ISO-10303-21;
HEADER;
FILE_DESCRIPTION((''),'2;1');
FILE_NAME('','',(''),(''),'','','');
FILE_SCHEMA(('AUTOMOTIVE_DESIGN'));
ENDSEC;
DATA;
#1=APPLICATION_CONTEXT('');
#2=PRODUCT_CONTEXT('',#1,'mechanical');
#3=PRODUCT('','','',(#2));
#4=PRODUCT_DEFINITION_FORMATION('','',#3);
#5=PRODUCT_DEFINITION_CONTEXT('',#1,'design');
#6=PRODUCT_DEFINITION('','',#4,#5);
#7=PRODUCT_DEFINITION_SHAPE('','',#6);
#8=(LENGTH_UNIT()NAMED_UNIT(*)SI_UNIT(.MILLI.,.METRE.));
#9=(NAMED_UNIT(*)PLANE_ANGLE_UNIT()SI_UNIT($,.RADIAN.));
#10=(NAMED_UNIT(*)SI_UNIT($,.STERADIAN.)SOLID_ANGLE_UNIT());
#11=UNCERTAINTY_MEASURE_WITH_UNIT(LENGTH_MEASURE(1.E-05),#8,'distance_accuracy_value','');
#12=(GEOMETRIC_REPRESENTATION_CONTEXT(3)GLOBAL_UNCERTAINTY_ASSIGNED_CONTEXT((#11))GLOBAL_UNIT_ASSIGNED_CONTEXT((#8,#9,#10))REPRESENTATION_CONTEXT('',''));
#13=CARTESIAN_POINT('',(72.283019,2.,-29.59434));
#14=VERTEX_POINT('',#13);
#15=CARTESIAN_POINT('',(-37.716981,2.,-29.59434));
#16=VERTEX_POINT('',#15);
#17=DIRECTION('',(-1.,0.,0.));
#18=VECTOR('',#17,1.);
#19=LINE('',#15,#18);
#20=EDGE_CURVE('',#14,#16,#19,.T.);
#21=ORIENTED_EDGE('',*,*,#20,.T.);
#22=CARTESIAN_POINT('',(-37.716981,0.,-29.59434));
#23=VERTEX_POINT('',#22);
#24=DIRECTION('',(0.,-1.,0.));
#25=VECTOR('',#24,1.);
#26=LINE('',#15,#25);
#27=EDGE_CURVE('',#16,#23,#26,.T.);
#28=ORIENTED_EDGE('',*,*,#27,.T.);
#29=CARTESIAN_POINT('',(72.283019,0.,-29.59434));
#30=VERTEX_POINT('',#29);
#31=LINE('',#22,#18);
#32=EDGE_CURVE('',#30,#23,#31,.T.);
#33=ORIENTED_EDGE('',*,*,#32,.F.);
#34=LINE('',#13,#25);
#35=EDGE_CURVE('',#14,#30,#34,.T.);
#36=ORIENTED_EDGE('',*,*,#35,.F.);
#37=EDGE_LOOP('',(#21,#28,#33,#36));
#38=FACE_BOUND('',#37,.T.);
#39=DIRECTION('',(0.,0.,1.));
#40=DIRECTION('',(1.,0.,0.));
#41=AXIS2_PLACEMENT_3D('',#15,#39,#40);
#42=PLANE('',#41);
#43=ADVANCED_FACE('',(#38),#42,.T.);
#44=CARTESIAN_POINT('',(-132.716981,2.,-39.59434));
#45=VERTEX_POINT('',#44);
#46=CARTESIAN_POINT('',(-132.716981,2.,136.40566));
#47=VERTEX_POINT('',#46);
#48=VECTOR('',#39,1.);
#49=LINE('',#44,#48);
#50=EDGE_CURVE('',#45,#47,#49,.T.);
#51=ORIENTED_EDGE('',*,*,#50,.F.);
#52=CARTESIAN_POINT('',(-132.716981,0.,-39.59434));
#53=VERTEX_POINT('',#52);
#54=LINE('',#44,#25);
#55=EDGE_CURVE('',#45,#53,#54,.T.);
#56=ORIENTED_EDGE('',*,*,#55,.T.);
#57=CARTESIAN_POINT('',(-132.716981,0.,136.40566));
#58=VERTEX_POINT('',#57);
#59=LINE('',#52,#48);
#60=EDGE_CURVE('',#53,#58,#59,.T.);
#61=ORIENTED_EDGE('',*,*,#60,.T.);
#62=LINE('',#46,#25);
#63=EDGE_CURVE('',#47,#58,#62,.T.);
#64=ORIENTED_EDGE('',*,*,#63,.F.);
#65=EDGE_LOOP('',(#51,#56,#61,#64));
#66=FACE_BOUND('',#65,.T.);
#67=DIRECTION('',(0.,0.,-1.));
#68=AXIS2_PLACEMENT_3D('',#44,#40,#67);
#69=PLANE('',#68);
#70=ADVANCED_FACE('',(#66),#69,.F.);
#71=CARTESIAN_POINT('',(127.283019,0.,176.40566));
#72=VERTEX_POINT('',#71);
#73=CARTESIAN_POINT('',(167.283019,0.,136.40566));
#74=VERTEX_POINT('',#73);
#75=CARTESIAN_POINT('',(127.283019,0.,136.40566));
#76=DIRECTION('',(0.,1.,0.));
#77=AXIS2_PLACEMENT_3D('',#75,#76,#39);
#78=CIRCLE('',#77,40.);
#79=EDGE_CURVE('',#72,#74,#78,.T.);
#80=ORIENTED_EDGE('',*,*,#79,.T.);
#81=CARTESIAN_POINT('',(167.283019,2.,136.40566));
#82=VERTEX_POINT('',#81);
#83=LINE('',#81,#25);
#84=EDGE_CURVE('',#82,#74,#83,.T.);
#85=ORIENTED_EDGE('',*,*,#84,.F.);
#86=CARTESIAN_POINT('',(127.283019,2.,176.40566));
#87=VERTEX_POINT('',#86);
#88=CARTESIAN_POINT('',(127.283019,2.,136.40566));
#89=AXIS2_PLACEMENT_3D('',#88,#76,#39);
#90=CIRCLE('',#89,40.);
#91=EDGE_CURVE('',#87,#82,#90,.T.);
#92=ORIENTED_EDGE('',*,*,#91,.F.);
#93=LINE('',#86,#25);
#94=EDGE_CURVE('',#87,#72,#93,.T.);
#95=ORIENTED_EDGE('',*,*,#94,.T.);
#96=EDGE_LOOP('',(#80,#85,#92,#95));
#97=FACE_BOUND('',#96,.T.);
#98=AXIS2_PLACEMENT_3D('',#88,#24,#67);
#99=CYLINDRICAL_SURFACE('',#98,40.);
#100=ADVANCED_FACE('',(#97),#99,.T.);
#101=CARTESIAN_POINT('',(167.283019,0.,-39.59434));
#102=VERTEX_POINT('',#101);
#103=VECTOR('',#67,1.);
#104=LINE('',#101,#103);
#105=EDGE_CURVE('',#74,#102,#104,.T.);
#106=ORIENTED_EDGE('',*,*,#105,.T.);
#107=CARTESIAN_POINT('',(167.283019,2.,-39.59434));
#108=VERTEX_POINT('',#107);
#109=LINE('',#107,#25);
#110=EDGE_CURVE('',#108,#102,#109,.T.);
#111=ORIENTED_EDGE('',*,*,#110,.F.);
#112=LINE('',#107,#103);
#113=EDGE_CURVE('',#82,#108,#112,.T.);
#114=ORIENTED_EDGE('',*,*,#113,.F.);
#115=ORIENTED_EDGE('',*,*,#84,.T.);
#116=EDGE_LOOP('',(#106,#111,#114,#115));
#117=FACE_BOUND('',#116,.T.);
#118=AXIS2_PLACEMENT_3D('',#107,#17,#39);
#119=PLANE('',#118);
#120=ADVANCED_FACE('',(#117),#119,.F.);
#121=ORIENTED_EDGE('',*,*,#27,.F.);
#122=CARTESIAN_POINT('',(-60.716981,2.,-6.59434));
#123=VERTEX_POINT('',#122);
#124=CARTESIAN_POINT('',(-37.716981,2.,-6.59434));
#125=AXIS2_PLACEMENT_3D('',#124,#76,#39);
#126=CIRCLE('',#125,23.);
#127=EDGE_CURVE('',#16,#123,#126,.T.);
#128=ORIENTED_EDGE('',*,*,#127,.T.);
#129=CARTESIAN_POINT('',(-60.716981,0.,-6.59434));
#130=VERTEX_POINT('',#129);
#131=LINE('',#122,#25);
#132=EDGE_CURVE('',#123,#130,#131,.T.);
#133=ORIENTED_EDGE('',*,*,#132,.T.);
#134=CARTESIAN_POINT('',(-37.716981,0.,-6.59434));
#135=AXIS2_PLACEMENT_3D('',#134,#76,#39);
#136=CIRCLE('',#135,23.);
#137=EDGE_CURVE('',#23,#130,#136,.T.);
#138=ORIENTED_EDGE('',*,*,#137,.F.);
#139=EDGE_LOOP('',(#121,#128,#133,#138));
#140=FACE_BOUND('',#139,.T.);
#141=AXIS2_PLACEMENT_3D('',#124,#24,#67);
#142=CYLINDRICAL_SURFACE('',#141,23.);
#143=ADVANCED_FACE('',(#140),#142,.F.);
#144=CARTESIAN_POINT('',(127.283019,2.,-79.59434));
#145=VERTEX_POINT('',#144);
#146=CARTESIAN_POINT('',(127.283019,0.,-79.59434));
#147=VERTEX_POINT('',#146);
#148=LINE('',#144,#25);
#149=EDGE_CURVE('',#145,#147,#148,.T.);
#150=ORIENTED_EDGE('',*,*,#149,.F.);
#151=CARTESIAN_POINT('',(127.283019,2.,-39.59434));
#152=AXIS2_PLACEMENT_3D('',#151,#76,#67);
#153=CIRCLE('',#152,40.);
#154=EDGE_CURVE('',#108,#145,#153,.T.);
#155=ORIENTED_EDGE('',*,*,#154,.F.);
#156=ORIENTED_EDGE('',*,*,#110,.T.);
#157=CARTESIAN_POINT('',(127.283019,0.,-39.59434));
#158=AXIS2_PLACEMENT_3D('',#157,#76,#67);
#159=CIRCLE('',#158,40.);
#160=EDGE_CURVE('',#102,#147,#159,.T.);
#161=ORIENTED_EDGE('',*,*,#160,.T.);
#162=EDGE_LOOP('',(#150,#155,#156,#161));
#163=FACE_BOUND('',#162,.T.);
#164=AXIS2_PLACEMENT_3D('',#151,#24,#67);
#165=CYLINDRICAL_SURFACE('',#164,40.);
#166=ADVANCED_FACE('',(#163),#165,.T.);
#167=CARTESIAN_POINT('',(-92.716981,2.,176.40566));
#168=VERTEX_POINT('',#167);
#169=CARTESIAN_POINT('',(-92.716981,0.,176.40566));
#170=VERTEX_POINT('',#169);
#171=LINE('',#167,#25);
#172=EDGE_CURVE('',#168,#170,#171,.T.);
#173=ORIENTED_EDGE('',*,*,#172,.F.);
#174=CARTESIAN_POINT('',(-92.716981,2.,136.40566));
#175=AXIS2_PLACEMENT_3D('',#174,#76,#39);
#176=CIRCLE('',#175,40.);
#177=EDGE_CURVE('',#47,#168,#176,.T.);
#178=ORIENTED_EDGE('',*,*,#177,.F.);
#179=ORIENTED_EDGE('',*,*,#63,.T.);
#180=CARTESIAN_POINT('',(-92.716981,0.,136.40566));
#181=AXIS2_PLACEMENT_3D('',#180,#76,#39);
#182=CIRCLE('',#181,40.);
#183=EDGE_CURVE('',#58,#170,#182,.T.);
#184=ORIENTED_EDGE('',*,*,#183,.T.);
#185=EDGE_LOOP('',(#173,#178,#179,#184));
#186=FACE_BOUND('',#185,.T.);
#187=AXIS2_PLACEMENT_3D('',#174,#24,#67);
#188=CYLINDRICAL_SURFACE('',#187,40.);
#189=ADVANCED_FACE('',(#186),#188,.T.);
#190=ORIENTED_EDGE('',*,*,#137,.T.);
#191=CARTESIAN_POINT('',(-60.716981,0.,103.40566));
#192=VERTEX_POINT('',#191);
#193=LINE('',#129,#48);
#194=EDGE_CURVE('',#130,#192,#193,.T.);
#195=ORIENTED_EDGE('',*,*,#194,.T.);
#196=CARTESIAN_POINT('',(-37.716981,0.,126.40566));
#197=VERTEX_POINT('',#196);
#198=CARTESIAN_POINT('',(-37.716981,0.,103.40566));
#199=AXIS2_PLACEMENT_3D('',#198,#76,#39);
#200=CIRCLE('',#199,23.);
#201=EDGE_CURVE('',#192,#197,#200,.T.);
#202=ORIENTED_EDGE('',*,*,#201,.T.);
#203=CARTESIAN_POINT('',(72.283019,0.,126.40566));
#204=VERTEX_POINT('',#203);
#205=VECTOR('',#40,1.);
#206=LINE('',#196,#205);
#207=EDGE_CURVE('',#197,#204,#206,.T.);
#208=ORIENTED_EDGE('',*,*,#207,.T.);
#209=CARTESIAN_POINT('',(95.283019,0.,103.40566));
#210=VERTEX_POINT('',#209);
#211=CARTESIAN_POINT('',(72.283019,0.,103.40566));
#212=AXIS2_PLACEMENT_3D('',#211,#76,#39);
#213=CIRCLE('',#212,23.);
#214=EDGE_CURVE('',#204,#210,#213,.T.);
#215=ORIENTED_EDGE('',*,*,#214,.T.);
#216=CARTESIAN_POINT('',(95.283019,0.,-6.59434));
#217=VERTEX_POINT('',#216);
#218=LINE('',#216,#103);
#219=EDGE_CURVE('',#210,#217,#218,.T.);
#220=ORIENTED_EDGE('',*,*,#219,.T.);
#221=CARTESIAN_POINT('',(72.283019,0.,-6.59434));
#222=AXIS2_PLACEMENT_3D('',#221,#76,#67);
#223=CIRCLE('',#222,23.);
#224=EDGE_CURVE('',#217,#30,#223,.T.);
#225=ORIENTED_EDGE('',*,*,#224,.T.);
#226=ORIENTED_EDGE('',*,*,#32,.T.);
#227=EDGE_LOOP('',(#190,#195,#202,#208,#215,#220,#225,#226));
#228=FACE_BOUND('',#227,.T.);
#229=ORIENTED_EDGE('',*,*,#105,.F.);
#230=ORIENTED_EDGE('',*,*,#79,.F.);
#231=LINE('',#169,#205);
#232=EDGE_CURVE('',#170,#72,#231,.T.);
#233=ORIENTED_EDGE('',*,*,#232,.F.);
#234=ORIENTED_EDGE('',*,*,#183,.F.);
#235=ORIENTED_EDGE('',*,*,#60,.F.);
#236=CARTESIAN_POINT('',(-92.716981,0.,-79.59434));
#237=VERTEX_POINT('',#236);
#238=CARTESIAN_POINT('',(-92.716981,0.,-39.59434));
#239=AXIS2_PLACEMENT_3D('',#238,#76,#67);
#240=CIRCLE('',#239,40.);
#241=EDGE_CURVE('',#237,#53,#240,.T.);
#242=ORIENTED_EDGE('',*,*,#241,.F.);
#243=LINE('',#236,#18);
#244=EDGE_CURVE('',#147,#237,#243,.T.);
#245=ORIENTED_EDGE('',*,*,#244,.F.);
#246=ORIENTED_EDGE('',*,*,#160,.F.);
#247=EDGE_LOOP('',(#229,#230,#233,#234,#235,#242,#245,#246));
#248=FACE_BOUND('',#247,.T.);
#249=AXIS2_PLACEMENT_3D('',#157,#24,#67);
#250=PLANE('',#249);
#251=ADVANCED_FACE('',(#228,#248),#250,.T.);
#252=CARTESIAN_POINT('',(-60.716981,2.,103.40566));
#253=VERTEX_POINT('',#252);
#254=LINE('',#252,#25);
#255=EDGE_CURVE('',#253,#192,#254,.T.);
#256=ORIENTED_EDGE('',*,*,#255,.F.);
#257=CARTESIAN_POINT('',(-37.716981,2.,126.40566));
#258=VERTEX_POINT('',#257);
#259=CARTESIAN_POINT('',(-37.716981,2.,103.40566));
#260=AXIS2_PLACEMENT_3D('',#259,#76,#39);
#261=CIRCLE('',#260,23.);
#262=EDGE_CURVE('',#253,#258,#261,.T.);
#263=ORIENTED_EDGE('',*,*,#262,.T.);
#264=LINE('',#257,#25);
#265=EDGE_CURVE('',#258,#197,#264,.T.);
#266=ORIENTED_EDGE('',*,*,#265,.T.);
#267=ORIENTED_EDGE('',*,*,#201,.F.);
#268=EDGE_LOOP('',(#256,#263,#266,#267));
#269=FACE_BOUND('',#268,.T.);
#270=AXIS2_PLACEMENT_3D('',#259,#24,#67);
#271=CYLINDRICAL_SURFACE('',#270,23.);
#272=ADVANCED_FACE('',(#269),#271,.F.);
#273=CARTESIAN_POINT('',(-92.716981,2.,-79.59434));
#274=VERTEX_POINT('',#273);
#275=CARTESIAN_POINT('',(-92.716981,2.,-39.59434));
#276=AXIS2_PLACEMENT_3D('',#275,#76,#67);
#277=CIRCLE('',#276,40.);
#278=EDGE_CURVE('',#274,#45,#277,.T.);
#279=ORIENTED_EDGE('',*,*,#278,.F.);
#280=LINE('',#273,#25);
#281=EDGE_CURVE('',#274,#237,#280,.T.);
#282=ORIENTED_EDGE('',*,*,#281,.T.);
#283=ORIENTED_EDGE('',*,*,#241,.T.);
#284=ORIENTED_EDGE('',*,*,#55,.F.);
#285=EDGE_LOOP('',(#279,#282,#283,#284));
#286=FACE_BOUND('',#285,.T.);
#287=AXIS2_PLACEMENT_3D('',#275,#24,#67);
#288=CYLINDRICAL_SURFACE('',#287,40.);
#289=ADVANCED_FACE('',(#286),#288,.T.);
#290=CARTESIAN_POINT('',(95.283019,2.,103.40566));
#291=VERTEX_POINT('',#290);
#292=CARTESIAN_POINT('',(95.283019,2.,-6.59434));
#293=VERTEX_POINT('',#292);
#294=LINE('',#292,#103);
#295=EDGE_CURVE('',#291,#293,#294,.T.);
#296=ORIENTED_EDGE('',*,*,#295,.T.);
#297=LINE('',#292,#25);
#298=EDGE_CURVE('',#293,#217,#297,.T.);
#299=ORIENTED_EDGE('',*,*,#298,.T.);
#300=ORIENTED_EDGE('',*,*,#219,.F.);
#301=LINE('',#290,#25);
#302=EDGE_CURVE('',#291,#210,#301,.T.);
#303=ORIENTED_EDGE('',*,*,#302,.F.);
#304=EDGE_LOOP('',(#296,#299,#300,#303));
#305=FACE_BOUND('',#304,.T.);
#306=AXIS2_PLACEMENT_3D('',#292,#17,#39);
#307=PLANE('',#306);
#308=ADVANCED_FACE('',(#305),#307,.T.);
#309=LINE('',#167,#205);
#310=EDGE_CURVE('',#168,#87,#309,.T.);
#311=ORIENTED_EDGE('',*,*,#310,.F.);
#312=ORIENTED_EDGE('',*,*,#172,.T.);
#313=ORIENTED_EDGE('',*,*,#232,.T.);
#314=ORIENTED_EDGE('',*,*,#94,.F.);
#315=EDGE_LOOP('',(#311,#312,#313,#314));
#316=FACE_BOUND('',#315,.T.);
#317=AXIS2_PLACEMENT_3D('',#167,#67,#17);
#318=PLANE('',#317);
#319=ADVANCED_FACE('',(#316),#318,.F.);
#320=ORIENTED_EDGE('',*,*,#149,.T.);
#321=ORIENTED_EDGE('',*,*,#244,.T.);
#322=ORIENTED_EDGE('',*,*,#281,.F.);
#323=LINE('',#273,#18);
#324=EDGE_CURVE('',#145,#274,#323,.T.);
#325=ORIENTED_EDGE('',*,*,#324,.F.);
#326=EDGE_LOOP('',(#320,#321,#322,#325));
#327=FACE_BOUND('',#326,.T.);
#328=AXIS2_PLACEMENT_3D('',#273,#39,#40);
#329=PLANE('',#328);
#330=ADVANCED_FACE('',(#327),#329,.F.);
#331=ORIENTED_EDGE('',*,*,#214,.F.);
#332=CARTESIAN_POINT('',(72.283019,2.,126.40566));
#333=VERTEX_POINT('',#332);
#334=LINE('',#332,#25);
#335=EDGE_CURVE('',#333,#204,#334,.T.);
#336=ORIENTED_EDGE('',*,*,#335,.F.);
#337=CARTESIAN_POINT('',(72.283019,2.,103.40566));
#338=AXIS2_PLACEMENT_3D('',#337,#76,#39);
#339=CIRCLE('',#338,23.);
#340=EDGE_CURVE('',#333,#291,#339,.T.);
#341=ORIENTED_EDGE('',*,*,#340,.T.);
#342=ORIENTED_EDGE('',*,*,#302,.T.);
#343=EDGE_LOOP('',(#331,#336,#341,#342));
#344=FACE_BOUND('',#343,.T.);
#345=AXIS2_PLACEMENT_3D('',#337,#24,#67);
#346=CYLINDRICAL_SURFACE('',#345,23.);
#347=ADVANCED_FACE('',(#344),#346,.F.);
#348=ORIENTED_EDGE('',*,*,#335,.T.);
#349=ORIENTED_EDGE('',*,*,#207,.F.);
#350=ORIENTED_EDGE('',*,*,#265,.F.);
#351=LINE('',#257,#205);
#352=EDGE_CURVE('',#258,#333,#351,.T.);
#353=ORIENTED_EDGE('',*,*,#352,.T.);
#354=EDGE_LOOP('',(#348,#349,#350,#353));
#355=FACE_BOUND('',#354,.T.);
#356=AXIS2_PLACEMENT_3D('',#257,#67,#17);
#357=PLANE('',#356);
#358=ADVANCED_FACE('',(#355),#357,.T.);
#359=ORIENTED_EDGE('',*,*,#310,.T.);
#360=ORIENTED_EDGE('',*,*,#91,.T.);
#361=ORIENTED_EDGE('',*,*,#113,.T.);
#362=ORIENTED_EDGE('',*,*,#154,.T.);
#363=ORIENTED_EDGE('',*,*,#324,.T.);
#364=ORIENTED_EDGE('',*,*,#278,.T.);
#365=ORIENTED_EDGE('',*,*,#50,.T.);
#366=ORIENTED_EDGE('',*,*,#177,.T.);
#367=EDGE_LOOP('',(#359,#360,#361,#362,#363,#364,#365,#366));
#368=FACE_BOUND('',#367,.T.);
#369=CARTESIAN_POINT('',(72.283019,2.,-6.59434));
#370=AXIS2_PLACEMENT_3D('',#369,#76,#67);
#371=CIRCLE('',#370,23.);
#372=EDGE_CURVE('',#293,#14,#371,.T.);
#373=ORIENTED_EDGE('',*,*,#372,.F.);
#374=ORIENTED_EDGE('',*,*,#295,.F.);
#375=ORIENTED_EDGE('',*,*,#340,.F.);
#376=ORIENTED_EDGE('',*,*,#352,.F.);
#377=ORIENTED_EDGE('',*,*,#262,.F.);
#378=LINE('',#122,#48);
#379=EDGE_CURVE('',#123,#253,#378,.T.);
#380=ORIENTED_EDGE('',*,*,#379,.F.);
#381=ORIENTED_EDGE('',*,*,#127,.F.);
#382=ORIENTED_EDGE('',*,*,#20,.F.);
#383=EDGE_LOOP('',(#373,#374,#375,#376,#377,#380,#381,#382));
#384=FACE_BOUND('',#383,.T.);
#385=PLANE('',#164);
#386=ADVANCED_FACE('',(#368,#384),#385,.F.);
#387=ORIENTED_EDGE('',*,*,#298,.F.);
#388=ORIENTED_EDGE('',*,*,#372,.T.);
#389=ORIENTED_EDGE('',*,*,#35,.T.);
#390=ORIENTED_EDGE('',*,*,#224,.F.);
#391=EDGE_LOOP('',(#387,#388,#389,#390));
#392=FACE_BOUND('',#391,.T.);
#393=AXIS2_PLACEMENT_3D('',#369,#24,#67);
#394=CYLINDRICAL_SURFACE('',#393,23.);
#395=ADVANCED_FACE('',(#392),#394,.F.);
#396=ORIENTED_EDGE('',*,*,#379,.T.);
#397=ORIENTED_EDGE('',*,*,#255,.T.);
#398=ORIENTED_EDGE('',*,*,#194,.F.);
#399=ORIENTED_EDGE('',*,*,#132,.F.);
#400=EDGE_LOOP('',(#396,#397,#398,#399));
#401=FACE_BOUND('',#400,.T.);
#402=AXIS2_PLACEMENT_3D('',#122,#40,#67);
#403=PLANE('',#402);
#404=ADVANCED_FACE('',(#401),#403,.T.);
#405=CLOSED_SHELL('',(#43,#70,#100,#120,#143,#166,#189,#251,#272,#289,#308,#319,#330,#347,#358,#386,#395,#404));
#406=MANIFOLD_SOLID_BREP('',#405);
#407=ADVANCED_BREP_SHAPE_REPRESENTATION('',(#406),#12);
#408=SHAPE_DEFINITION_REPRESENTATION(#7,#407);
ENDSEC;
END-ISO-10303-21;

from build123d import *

# Parameters (mm, degrees)
BOSS_EXTRUDE1_DEPTH = 2


with BuildPart() as part:
    # Sketch1 → Boss-Extrude1 (new body)
    with BuildSketch(Plane(origin=(0, 0, 0), x_dir=(1, 0, 0), z_dir=(0, 1, 0))):
        with BuildLine():
            Line((-92.716981132, 79.594339623), (127.283018868, 79.594339623))
            ThreePointArc((127.283018868, 79.594339623), (155.567290115, 67.87861087), (167.283018868, 39.594339623))
            Line((167.283018868, 39.594339623), (167.283018868, -136.405660377))
            ThreePointArc((167.283018868, -136.405660377), (155.567290115, -164.689931625), (127.283018868, -176.405660377))
            Line((127.283018868, -176.405660377), (-92.716981132, -176.405660377))
            ThreePointArc((-92.716981132, -176.405660377), (-121.00125238, -164.689931625), (-132.716981132, -136.405660377))
            Line((-132.716981132, -136.405660377), (-132.716981132, 39.594339623))
            ThreePointArc((-132.716981132, 39.594339623), (-121.00125238, 67.87861087), (-92.716981132, 79.594339623))
        make_face()
        with BuildLine():
            Line((-37.716981132, 29.594339623), (72.283018868, 29.594339623))
            ThreePointArc((72.283018868, 29.594339623), (88.546474835, 22.85779559), (95.283018868, 6.594339623))
            Line((95.283018868, 6.594339623), (95.283018868, -103.405660377))
            ThreePointArc((95.283018868, -103.405660377), (88.546474835, -119.669116345), (72.283018868, -126.405660377))
            Line((72.283018868, -126.405660377), (-37.716981132, -126.405660377))
            ThreePointArc((-37.716981132, -126.405660377), (-53.980437099, -119.669116345), (-60.716981132, -103.405660377))
            Line((-60.716981132, -103.405660377), (-60.716981132, 6.594339623))
            ThreePointArc((-60.716981132, 6.594339623), (-53.980437099, 22.85779559), (-37.716981132, 29.594339623))
        make_face(mode=Mode.SUBTRACT)
    extrude(amount=BOSS_EXTRUDE1_DEPTH)


solid = part.part
